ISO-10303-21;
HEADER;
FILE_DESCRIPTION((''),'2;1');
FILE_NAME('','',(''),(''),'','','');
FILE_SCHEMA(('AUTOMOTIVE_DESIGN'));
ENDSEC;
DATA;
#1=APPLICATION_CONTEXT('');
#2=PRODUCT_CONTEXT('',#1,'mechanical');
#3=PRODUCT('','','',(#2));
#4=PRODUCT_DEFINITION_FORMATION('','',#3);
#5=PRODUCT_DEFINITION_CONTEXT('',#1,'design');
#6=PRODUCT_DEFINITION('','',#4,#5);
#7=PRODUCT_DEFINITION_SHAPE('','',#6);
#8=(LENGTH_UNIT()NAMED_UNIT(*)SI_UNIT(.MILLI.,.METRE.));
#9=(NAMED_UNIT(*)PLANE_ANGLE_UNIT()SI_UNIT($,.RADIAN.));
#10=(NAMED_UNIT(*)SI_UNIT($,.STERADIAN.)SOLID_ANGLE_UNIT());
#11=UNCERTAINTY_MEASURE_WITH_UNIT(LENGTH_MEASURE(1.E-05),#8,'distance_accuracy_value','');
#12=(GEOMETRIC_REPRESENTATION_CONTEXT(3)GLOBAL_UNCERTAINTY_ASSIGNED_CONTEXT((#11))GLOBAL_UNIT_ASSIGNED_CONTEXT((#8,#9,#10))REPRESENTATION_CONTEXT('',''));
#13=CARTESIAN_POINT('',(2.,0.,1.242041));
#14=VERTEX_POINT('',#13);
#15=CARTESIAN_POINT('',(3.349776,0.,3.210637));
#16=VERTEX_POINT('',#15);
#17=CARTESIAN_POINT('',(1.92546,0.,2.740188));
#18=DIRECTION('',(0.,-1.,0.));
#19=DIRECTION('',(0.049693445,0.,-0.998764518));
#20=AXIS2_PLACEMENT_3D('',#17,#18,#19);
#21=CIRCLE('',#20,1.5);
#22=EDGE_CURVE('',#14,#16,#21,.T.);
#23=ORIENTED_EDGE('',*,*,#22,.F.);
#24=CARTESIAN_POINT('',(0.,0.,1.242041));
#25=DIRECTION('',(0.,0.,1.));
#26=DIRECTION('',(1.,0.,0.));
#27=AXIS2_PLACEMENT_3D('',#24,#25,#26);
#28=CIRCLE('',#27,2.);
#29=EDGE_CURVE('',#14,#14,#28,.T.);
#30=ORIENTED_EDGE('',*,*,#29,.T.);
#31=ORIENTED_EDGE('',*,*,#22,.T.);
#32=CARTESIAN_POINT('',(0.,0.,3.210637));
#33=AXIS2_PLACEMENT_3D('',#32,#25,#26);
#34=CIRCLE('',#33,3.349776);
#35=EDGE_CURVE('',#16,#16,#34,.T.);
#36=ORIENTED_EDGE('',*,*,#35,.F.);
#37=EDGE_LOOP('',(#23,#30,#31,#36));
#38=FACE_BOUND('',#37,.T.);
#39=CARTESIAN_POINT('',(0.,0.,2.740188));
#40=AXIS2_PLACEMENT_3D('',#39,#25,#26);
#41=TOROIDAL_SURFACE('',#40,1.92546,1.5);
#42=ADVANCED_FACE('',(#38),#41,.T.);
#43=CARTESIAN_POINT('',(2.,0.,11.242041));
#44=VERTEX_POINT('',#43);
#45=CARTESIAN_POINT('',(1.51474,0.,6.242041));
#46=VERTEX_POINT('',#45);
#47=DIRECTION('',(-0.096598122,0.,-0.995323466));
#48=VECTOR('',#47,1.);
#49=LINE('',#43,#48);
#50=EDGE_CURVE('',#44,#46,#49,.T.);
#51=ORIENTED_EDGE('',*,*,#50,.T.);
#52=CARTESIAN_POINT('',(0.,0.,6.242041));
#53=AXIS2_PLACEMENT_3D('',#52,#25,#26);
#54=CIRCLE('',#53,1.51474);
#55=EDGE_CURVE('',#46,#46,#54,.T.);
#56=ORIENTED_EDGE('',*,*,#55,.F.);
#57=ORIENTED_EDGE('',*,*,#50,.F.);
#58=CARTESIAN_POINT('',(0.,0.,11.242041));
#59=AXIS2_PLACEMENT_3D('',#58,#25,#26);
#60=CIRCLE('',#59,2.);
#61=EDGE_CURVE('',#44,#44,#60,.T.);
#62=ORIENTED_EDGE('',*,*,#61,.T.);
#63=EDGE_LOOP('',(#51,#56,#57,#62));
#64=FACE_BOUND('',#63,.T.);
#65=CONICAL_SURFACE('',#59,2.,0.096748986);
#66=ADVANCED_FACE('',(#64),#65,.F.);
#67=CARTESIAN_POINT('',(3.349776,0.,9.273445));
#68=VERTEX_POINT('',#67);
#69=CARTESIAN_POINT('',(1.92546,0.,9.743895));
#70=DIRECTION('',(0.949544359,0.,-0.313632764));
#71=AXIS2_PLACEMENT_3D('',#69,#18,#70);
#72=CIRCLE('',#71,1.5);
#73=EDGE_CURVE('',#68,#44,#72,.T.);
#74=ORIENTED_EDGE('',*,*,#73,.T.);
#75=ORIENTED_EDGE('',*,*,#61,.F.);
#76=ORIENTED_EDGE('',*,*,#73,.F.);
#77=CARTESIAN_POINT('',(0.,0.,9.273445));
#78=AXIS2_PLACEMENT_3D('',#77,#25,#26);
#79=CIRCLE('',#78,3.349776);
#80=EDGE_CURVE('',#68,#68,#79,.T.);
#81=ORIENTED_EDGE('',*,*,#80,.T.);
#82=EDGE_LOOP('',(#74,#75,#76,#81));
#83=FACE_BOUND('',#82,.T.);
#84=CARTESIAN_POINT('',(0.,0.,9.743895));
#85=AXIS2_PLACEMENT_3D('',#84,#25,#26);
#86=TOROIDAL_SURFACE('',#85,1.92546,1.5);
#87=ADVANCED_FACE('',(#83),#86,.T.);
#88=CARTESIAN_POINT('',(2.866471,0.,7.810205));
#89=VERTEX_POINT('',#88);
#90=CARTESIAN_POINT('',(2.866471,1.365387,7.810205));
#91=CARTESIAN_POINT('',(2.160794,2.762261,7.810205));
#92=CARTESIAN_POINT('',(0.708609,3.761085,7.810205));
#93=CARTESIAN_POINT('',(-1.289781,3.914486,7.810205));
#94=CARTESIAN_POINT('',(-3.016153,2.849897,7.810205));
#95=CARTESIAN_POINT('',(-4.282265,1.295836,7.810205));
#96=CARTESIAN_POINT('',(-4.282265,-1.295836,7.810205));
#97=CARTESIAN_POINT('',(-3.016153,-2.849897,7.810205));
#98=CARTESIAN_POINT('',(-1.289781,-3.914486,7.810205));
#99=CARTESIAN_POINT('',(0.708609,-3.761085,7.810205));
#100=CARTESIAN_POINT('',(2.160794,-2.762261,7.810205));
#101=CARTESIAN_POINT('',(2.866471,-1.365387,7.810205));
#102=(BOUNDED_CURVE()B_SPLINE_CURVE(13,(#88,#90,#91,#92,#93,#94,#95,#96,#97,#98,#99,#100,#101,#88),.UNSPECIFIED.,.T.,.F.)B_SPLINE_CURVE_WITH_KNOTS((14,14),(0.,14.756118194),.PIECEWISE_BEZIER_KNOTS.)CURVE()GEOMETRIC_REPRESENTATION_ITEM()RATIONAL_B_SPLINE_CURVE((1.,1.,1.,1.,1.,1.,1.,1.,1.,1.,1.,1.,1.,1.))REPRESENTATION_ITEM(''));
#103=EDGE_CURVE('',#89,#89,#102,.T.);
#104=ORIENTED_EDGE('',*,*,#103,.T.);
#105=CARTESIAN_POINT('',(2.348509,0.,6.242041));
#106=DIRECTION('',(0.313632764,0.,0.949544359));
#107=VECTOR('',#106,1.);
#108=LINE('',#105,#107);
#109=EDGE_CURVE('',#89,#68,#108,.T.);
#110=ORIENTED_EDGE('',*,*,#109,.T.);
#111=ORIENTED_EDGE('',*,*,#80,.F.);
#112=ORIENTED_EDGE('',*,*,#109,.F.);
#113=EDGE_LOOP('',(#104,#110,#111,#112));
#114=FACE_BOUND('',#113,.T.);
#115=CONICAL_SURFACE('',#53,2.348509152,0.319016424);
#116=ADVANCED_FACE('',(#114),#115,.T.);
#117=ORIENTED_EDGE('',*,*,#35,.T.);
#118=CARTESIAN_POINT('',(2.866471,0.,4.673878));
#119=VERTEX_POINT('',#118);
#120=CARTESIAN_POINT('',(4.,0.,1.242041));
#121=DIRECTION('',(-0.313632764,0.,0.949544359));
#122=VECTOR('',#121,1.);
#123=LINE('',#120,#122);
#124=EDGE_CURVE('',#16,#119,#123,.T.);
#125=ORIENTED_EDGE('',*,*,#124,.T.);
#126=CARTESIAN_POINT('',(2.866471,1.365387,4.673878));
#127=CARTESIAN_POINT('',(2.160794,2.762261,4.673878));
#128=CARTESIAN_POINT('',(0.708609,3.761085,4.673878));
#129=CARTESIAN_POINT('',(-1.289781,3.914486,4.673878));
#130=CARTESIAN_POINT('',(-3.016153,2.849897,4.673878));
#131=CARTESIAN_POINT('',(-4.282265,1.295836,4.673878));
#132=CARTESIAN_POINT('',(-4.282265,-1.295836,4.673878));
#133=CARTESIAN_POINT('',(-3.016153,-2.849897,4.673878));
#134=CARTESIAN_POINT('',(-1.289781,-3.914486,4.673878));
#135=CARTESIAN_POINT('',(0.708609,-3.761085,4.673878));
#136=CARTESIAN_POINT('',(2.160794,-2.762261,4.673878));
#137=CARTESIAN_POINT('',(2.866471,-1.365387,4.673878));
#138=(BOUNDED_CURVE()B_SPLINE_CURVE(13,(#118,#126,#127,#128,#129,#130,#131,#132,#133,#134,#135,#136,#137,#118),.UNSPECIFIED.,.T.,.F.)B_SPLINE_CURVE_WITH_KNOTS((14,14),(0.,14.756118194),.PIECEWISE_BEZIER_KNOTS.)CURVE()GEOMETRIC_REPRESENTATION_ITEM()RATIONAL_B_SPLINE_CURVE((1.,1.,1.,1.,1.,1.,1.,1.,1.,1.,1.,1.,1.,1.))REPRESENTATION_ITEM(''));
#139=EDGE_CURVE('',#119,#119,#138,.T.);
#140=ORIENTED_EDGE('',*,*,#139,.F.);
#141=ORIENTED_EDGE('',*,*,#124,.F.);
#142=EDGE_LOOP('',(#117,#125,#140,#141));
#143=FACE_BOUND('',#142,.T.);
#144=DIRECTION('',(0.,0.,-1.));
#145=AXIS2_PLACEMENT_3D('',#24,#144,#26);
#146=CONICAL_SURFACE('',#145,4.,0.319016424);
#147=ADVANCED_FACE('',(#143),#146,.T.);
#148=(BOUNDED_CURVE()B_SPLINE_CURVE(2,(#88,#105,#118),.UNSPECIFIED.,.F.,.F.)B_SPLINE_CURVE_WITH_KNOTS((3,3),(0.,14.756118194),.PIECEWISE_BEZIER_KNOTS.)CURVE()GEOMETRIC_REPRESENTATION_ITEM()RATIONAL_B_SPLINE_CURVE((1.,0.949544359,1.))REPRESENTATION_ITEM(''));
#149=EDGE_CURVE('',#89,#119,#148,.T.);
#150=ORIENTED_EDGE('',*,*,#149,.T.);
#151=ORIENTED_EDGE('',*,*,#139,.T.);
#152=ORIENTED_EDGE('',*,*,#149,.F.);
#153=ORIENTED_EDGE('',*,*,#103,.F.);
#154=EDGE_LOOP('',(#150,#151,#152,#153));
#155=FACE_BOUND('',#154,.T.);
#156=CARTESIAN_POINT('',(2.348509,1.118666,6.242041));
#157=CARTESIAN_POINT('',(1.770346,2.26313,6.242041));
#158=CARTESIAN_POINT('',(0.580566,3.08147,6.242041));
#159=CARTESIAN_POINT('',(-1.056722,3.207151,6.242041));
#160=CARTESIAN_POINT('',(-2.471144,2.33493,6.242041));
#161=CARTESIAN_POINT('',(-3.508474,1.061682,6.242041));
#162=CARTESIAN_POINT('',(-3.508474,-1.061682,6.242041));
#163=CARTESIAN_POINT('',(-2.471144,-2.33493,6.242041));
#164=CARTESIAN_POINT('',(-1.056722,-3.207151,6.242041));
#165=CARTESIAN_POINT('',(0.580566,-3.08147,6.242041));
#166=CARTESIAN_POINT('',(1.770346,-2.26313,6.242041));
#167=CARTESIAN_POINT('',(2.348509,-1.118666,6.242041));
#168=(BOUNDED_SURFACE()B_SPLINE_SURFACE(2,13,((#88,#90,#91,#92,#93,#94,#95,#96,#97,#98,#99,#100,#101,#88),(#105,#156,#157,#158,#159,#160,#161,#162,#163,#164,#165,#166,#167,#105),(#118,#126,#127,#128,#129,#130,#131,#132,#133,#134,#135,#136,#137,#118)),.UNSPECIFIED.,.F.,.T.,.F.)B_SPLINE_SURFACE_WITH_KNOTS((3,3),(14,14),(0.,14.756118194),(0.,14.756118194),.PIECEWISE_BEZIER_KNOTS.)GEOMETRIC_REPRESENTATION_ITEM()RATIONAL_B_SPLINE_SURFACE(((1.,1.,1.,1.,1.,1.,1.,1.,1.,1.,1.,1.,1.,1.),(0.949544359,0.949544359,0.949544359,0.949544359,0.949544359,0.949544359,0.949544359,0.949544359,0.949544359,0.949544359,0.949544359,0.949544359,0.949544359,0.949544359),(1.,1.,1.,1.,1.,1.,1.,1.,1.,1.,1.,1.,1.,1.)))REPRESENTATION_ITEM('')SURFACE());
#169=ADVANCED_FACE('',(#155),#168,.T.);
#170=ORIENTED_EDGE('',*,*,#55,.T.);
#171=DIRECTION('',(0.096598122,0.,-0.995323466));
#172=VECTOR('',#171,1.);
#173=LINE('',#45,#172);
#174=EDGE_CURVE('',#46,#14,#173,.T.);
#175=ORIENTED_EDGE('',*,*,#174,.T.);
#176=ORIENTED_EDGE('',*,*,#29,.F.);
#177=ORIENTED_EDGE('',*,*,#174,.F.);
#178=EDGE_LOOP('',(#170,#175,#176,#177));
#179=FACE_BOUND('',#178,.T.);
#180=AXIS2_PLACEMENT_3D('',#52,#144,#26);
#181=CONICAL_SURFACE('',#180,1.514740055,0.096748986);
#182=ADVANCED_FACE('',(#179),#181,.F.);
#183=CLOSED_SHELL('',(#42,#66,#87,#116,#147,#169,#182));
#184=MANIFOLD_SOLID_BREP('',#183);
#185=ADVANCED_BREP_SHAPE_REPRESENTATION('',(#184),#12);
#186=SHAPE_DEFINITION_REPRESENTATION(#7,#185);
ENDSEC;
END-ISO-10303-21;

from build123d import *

# Parameters (mm, degrees)
F3_R = 5


# Not quite as in the source:
# - a fillet or chamfer that OpenCascade refuses, or shapes differently, is made with other operations: its cross-section is extruded or revolved along the edge and cut away or added


with BuildPart() as f1:
    # F0 (on Front) → F1 (revolve)
    with BuildSketch(Plane.XZ):
        Polygon((4, 11.2420413941), (2, 11.2420413941), (1.5147400554, 6.2420413941), (2, 1.2420413941), (4, 1.2420413941), (2.3485091515, 6.2420413941), align=None)
    revolve(axis=Axis((0, 0, 6.2420413941), (0, 0, 1)))

    # F2: fillet of radius 1.5 on 2 edges, made by hand

    # F2_s1 → F2_t2 (revolve, cut)
    with BuildSketch(Plane.XZ):
        with BuildLine():
            ThreePointArc((3.3497763701, 9.2734454721), (3.162587688, 10.592136722), (2, 11.2420413941))
            Line((2, 11.2420413941), (4, 11.2420413941))
            Line((4, 11.2420413941), (3.3497763701, 9.2734454721))
        make_face()
    revolve(axis=Axis((0, 0, 11.2420413941), (0, 0, 1)), mode=Mode.SUBTRACT)

    # F2_s3 → F2_t4 (revolve, cut)
    with BuildSketch(Plane.XZ):
        with BuildLine():
            ThreePointArc((2, 1.2420413941), (3.162587688, 1.8919460662), (3.3497763701, 3.2106373161))
            Line((3.3497763701, 3.2106373161), (4, 1.2420413941))
            Line((4, 1.2420413941), (2, 1.2420413941))
        make_face()
    revolve(axis=Axis((0, 0, 1.2420413941), (0, 0, 1)), mode=Mode.SUBTRACT)

    # F3
    f3_edges = [f1.edges().sort_by_distance(p)[0] for p in [
        (-2.348509, 0, 6.242041),
    ]]
    fillet(f3_edges, radius=F3_R)


solid = f1.part
